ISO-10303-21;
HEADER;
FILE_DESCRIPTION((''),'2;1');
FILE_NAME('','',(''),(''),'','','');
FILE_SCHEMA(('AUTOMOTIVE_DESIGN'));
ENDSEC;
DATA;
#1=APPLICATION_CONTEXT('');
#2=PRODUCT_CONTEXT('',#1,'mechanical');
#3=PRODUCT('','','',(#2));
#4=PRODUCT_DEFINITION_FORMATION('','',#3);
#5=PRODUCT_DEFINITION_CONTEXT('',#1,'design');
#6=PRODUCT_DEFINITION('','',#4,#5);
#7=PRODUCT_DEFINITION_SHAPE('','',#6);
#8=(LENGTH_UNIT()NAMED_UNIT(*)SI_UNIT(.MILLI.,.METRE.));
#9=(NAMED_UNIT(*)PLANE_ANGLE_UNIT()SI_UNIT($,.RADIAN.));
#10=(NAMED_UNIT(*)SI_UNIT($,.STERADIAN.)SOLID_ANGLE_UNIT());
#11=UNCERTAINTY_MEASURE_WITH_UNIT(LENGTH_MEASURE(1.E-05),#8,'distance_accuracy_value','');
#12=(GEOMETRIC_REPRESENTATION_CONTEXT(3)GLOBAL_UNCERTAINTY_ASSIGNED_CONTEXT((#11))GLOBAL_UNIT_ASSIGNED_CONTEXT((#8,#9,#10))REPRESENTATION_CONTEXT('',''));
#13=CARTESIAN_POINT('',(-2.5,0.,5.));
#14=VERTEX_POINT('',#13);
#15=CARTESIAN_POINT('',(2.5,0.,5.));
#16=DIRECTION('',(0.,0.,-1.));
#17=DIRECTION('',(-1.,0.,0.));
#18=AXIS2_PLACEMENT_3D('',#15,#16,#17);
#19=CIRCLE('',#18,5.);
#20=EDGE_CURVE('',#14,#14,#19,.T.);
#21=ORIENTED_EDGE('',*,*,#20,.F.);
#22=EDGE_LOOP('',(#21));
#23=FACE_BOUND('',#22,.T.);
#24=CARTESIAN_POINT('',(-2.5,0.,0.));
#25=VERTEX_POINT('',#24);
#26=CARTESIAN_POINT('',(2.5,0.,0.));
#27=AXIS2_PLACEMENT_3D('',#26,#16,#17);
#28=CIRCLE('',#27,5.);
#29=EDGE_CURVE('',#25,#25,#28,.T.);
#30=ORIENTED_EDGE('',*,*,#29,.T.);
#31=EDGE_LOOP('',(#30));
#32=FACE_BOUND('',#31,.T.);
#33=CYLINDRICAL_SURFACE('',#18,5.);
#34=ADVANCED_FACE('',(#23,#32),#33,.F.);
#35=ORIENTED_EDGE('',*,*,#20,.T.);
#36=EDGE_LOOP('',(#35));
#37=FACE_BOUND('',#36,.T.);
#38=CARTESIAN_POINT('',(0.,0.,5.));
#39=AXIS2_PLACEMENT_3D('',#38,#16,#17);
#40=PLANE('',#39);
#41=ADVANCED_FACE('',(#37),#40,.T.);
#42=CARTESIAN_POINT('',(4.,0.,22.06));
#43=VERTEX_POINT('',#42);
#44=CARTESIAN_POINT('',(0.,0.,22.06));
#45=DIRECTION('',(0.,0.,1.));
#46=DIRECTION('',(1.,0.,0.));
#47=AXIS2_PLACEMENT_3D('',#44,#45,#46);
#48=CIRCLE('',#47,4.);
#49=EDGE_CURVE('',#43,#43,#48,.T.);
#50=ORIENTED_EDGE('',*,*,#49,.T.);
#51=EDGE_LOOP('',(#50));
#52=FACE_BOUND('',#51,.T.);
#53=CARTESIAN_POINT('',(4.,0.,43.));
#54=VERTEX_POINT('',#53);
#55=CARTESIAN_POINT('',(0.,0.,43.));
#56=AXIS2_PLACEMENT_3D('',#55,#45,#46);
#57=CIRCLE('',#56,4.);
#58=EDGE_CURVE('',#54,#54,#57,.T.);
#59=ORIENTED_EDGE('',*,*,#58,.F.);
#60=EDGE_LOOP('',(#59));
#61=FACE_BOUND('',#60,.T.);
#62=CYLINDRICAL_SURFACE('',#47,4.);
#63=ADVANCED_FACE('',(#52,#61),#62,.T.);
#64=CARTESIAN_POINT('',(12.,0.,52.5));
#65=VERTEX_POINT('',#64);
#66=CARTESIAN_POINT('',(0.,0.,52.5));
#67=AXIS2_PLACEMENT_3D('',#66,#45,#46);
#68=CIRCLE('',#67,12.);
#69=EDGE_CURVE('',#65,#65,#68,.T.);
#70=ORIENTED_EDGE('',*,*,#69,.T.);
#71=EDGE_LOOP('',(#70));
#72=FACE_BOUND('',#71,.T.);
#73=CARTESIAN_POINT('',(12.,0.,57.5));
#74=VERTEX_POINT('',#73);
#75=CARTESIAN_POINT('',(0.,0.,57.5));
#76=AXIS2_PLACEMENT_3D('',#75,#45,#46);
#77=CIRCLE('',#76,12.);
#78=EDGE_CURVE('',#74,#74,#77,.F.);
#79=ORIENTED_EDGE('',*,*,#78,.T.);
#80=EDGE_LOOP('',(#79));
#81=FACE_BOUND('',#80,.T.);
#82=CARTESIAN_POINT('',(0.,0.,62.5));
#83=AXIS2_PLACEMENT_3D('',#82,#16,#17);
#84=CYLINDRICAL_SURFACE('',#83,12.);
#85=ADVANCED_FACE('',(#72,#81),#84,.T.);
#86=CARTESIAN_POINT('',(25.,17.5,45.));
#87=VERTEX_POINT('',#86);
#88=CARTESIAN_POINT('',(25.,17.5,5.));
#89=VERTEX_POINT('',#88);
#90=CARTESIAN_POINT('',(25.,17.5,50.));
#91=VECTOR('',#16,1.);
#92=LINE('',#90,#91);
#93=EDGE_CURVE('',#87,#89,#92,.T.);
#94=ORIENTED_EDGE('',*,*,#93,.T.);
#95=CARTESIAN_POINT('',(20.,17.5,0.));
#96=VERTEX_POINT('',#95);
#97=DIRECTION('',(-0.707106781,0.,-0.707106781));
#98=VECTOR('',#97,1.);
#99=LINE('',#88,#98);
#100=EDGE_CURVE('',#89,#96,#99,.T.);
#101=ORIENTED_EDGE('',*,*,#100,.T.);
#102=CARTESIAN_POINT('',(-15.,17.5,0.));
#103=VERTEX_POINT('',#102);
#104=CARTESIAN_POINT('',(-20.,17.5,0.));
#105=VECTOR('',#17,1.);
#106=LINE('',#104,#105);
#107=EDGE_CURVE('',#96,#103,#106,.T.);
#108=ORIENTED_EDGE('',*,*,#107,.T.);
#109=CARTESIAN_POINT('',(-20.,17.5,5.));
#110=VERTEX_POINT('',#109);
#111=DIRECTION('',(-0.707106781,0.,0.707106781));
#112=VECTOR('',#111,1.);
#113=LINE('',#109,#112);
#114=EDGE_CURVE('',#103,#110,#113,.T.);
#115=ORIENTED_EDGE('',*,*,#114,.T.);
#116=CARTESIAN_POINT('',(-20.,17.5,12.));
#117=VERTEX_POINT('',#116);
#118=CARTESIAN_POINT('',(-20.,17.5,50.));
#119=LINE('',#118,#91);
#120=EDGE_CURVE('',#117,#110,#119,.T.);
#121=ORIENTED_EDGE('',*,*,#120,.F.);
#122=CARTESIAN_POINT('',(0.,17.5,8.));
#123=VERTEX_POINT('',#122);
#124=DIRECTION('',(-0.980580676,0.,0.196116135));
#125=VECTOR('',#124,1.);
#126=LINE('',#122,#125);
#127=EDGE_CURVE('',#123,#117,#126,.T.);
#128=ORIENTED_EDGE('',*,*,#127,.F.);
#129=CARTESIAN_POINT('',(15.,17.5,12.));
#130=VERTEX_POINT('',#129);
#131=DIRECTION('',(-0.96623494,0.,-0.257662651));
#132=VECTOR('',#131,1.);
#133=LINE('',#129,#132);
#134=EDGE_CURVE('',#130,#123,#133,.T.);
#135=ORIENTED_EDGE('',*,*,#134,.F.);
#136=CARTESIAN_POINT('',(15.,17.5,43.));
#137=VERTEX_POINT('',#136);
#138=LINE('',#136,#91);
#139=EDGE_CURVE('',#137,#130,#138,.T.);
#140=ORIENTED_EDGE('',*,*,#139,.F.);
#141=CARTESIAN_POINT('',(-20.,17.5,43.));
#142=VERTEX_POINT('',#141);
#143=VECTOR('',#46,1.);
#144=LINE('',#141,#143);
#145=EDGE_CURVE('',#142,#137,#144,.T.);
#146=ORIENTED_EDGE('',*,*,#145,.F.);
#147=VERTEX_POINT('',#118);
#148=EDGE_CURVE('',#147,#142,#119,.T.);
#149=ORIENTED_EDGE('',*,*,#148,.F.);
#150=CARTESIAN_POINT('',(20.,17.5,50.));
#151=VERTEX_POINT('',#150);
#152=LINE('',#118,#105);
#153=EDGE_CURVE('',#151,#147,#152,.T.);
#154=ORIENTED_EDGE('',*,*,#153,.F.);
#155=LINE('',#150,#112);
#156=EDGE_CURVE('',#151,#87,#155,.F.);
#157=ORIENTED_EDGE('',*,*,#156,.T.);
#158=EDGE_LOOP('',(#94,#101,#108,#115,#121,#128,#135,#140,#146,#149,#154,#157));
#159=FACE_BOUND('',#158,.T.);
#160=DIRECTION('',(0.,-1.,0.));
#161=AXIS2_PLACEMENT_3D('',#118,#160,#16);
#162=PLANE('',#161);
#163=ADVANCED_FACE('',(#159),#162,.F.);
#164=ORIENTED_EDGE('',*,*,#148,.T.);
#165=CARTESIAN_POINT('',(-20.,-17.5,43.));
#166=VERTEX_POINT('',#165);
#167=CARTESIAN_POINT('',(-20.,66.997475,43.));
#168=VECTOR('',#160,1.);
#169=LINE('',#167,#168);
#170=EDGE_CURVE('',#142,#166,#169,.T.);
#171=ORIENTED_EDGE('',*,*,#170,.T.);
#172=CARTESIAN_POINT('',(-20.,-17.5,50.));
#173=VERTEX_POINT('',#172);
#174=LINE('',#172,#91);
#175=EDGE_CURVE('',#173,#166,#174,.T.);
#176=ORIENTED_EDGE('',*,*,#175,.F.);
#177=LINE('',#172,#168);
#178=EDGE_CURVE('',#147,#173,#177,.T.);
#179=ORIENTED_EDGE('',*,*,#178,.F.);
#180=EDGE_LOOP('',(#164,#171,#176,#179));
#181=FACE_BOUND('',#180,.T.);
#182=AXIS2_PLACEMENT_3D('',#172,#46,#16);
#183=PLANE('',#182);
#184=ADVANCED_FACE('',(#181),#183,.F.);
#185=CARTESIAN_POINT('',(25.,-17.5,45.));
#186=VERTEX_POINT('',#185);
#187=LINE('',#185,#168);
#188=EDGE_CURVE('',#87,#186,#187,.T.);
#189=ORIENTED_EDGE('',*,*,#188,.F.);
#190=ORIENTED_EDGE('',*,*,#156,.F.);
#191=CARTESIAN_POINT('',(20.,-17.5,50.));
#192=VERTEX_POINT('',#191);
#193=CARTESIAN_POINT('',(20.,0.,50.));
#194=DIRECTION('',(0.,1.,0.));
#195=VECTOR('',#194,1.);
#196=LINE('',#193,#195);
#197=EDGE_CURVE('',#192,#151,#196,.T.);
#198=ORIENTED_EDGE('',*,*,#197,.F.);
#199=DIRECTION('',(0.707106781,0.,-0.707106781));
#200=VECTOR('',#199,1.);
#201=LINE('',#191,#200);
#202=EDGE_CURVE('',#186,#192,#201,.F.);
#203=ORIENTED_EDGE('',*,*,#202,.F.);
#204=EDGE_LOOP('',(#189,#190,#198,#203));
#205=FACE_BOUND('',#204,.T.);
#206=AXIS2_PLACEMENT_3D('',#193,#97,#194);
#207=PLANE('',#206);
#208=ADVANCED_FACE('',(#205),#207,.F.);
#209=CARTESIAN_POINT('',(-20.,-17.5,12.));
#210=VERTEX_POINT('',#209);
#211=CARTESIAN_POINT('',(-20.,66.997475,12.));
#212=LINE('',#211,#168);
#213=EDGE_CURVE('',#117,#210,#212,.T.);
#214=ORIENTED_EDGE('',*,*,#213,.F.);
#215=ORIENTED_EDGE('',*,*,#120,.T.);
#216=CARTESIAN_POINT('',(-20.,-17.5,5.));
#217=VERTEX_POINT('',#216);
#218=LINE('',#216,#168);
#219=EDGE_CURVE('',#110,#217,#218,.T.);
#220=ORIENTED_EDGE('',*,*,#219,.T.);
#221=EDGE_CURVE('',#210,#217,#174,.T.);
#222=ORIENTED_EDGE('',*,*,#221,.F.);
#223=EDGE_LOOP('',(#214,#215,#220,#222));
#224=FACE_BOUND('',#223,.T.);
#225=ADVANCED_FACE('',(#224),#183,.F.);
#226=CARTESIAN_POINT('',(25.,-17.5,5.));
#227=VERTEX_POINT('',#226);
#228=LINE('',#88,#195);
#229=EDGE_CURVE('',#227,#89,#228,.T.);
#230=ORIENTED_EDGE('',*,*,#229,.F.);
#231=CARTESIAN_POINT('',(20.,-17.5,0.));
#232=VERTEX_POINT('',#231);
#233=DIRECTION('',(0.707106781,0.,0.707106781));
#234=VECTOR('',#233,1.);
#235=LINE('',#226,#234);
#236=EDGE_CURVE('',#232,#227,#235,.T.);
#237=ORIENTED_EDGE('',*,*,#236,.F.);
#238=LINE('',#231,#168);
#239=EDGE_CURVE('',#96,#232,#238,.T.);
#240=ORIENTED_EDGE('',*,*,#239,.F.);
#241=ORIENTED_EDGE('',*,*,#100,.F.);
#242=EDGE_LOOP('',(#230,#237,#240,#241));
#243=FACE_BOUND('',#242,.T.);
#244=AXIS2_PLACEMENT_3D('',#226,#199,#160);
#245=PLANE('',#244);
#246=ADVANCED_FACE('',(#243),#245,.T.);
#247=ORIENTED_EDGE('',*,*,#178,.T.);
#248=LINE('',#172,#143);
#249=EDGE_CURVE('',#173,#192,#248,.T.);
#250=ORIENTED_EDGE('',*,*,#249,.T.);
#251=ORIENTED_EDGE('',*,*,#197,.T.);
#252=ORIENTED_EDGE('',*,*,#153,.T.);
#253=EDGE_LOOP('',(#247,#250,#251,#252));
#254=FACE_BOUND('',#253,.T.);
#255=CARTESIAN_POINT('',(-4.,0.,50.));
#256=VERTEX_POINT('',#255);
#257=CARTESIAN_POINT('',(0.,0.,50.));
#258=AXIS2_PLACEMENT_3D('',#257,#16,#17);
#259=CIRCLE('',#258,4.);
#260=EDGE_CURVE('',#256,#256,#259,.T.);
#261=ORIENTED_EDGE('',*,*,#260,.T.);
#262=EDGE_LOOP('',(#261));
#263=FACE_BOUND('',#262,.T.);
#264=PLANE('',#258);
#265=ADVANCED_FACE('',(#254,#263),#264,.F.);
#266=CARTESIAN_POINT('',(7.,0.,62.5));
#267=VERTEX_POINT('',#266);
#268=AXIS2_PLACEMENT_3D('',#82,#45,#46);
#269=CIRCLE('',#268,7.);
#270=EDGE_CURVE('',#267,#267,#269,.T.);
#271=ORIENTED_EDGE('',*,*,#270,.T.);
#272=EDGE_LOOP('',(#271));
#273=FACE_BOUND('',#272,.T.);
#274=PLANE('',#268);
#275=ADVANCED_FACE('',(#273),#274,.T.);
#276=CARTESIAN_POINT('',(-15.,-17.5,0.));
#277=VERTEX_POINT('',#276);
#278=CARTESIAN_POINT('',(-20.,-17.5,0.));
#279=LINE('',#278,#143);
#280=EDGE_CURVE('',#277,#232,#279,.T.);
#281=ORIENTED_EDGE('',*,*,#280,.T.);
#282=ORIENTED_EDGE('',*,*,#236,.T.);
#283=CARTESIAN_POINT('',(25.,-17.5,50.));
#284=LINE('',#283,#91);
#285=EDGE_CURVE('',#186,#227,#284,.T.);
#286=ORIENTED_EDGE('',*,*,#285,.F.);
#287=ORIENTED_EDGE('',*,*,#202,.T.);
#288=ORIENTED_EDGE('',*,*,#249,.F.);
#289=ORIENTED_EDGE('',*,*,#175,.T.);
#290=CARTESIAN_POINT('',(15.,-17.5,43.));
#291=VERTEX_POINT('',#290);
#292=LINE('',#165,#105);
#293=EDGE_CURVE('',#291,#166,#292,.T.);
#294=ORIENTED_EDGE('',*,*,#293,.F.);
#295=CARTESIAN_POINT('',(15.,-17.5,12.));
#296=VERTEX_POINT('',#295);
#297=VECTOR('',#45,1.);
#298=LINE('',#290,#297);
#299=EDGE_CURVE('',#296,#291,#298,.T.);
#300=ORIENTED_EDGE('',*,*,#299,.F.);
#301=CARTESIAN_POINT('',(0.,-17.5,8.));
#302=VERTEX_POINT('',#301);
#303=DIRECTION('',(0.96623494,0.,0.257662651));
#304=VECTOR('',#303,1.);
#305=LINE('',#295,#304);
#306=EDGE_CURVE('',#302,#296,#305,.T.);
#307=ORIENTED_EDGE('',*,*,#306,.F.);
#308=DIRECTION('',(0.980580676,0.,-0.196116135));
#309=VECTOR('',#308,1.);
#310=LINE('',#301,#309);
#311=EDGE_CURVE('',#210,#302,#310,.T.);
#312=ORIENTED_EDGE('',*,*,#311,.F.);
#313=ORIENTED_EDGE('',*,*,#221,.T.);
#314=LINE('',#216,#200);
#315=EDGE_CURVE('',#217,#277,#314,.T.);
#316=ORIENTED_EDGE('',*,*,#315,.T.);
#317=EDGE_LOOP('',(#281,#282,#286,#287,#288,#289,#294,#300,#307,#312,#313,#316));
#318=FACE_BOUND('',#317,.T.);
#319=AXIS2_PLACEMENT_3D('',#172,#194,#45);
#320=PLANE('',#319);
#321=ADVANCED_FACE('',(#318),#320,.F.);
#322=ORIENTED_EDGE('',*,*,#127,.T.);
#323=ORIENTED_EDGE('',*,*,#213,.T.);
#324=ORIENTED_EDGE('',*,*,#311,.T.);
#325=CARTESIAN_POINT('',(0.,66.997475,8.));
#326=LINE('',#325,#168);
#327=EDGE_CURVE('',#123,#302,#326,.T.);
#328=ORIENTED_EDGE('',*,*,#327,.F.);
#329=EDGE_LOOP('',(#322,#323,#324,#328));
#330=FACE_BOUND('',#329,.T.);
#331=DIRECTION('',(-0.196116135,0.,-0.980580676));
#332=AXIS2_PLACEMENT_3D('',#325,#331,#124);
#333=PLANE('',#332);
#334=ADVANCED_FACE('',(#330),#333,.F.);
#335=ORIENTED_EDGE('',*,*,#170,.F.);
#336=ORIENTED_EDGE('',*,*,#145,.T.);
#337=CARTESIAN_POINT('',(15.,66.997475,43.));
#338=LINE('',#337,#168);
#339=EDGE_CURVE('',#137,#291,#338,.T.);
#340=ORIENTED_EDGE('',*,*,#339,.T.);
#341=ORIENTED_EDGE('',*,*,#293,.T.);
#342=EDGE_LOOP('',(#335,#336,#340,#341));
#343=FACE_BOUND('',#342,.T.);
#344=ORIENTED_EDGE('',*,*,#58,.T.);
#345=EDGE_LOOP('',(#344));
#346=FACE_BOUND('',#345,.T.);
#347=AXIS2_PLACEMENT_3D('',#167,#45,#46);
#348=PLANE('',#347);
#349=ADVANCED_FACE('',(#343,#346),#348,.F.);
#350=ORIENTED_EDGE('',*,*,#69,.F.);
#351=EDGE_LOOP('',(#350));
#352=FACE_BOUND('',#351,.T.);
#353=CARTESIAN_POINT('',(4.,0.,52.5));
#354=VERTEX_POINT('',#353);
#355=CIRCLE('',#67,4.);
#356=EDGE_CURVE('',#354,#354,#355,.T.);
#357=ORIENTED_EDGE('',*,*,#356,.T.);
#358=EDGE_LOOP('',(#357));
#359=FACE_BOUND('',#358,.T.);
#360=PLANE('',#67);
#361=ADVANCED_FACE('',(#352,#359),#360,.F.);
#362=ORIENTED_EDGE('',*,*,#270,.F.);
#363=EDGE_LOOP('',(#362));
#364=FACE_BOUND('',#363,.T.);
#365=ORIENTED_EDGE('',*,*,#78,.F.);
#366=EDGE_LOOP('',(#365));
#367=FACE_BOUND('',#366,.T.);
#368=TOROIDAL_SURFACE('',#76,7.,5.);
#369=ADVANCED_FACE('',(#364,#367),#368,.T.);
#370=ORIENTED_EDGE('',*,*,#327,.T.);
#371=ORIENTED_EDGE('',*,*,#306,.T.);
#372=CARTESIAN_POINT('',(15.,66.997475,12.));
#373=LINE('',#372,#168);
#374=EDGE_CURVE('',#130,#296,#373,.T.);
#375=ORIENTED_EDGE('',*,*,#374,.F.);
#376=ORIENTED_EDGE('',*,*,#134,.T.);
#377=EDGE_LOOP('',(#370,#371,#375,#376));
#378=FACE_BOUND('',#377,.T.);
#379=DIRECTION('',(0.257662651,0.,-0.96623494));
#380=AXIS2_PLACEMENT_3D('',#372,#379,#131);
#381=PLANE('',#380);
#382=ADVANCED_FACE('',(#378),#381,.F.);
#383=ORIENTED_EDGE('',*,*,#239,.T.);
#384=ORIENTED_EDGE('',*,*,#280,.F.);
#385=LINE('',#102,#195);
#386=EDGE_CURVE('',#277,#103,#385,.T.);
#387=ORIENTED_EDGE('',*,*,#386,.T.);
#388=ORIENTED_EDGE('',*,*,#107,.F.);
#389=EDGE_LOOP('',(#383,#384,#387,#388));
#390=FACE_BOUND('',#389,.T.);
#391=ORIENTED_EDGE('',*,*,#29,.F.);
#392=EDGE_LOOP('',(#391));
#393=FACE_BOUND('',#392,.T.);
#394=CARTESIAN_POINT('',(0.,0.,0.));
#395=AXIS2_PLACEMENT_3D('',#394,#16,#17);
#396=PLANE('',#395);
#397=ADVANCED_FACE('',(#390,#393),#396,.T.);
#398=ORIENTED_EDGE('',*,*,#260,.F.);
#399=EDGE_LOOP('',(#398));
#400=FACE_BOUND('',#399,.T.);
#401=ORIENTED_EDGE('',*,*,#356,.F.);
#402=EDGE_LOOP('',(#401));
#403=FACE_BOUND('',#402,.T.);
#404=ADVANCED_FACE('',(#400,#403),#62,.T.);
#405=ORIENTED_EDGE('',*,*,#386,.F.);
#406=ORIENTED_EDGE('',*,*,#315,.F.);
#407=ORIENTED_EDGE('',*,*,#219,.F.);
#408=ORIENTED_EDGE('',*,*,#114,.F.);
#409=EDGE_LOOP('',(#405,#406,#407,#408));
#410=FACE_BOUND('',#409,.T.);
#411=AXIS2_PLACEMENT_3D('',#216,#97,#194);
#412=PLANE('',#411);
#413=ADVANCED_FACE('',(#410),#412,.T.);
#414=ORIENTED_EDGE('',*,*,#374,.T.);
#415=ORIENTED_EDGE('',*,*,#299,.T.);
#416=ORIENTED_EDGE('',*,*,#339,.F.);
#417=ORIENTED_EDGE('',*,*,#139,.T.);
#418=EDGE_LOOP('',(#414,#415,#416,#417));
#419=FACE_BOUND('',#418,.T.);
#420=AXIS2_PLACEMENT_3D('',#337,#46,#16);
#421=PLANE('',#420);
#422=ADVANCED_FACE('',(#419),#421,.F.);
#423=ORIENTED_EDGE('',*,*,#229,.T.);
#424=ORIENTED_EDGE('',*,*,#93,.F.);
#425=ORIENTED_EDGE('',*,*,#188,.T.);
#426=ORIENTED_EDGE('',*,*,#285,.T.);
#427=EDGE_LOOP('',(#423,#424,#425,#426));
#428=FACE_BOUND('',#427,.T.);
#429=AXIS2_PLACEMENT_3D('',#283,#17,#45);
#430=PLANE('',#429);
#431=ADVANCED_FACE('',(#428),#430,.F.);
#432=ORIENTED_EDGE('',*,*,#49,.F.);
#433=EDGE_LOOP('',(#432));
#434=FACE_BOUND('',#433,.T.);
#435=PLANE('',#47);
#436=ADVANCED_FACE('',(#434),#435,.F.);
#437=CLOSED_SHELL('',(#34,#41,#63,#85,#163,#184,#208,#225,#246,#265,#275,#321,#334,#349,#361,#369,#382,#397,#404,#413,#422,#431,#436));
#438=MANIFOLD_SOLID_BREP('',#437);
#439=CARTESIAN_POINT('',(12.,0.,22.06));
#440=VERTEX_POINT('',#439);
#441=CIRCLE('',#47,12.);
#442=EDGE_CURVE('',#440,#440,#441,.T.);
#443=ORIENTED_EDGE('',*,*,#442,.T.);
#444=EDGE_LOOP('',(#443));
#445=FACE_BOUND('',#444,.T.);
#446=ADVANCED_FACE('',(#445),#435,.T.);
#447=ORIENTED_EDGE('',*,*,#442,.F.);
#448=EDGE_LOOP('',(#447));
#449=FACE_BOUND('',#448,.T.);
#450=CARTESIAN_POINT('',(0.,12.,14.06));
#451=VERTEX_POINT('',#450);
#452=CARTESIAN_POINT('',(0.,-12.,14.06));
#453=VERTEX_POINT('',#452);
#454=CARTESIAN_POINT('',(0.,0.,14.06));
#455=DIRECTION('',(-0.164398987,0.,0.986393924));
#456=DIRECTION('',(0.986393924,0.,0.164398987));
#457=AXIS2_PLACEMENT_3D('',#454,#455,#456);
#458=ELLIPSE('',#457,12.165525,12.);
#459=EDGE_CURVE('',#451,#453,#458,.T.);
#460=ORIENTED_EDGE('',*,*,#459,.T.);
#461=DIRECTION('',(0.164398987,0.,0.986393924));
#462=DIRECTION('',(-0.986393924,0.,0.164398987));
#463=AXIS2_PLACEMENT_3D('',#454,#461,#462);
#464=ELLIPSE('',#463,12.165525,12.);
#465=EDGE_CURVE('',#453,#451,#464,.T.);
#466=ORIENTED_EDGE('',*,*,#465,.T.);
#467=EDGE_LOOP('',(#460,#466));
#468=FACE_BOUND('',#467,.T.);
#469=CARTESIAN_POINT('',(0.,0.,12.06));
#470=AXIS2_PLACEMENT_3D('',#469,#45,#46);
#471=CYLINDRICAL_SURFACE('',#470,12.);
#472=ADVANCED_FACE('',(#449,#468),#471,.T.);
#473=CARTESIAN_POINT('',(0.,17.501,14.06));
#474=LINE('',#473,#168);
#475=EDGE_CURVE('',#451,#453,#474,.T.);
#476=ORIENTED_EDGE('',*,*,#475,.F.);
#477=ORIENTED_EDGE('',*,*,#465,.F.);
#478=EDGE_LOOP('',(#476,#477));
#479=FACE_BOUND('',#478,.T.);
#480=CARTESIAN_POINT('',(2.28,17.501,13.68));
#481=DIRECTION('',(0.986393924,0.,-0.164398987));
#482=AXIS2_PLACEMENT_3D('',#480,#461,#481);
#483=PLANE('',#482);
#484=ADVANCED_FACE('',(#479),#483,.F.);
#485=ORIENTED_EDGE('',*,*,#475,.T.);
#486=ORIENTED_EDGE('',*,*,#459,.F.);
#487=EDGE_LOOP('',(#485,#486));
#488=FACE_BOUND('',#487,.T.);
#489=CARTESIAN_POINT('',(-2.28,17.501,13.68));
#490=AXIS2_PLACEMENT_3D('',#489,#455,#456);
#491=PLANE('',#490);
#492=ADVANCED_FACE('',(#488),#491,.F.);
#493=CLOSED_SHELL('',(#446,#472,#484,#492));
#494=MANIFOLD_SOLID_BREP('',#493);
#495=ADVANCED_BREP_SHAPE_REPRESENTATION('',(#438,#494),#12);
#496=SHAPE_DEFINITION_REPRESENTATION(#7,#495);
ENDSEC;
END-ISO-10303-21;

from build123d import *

# Parameters (mm, degrees)
SKETCH1_W                = 45
SKETCH1_H                = 35
BOSS_EXTRUDE1_DEPTH      = 50
CUT_EXTRUDE1_DEPTH       = 35
BOSS_EXTRUDE2_DEPTH      = 2.5
BOSS_EXTRUDE2_DEPTH_BACK = 27.94
SKETCH3_R                = 4
BOSS_EXTRUDE3_START      = 2.5
SKETCH3_3_R              = 12
BOSS_EXTRUDE3_DEPTH      = 10
BOSS_EXTRUDE6_START      = -27.94
SKETCH3_4_R              = 12
BOSS_EXTRUDE6_DEPTH      = 10
FILLET1_R                = 5
CUT_EXTRUDE2_START       = -29.5000001
CUT_EXTRUDE2_DEPTH       = 24.0000001
CHAMFER1_SIZE            = 5
SKETCH5_R                = 5
CUT_EXTRUDE3_DEPTH       = 5


# Read off the part's stored shape, not the designer's step: Cut-Extrude2
with BuildPart() as part:
    # Sketch1 → Boss-Extrude1 (new body)
    with BuildSketch(Plane.XY):
        with Locations((2.5, 0)):
            Rectangle(SKETCH1_W, SKETCH1_H)
    extrude(amount=BOSS_EXTRUDE1_DEPTH)

    # Sketch2 → Cut-Extrude1 (cut)
    with BuildSketch(Plane.XZ.offset(17.5)):
        Polygon((-20, 43), (15, 43), (15, 12), (0, 8), (-20, 12), align=None)
    extrude(amount=-CUT_EXTRUDE1_DEPTH, mode=Mode.SUBTRACT)

    # Sketch3 → Boss-Extrude2 (add, two sides: drawn at the far end of the back side and taken through both)
    with BuildSketch(Plane.XY.offset(50).offset(-BOSS_EXTRUDE2_DEPTH_BACK)):
        Circle(SKETCH3_R)
    extrude(amount=BOSS_EXTRUDE2_DEPTH + BOSS_EXTRUDE2_DEPTH_BACK)

    # Sketch3<3> → Boss-Extrude3 (add)
    with BuildSketch(Plane.XY.offset(50).offset(BOSS_EXTRUDE3_START)):
        Circle(SKETCH3_3_R)
    extrude(amount=BOSS_EXTRUDE3_DEPTH)

    # Fillet1
    fillet1_edges = [part.edges().sort_by_distance(p)[0] for p in [
        (-12, 0, 62.5),
    ]]
    fillet(fillet1_edges, radius=FILLET1_R)

    # Chamfer1
    chamfer1_edges = [part.edges().sort_by_distance(p)[0] for p in [
        (25, 0, 50),
        (25, 0, 0),
        (-20, 0, 0),
    ]]
    chamfer(chamfer1_edges, length=CHAMFER1_SIZE)

    # Sketch5 → Cut-Extrude3 (cut)
    with BuildSketch(Plane(origin=(0, 0, 0), x_dir=(-1, 0, 0), z_dir=(0, 0, -1))):
        with Locations((-2.5, 0)):
            Circle(SKETCH5_R)
    extrude(amount=-CUT_EXTRUDE3_DEPTH, mode=Mode.SUBTRACT)


with BuildPart() as body_2:
    # Sketch3<4> → Boss-Extrude6 (new body)
    with BuildSketch(Plane.XY.offset(50).offset(BOSS_EXTRUDE6_START)):
        Circle(SKETCH3_4_R)
    extrude(amount=-BOSS_EXTRUDE6_DEPTH)

    # Cut-Extrude2 outline → Cut-Extrude2 (cut)
    with BuildSketch(Plane.XZ.offset(17.5).offset(CUT_EXTRUDE2_START)):
        Polygon((12, 12.06), (0, 14.06), (-12, 12.06), align=None)
    extrude(amount=CUT_EXTRUDE2_DEPTH, mode=Mode.SUBTRACT)


solid = Compound([part.part, body_2.part])
